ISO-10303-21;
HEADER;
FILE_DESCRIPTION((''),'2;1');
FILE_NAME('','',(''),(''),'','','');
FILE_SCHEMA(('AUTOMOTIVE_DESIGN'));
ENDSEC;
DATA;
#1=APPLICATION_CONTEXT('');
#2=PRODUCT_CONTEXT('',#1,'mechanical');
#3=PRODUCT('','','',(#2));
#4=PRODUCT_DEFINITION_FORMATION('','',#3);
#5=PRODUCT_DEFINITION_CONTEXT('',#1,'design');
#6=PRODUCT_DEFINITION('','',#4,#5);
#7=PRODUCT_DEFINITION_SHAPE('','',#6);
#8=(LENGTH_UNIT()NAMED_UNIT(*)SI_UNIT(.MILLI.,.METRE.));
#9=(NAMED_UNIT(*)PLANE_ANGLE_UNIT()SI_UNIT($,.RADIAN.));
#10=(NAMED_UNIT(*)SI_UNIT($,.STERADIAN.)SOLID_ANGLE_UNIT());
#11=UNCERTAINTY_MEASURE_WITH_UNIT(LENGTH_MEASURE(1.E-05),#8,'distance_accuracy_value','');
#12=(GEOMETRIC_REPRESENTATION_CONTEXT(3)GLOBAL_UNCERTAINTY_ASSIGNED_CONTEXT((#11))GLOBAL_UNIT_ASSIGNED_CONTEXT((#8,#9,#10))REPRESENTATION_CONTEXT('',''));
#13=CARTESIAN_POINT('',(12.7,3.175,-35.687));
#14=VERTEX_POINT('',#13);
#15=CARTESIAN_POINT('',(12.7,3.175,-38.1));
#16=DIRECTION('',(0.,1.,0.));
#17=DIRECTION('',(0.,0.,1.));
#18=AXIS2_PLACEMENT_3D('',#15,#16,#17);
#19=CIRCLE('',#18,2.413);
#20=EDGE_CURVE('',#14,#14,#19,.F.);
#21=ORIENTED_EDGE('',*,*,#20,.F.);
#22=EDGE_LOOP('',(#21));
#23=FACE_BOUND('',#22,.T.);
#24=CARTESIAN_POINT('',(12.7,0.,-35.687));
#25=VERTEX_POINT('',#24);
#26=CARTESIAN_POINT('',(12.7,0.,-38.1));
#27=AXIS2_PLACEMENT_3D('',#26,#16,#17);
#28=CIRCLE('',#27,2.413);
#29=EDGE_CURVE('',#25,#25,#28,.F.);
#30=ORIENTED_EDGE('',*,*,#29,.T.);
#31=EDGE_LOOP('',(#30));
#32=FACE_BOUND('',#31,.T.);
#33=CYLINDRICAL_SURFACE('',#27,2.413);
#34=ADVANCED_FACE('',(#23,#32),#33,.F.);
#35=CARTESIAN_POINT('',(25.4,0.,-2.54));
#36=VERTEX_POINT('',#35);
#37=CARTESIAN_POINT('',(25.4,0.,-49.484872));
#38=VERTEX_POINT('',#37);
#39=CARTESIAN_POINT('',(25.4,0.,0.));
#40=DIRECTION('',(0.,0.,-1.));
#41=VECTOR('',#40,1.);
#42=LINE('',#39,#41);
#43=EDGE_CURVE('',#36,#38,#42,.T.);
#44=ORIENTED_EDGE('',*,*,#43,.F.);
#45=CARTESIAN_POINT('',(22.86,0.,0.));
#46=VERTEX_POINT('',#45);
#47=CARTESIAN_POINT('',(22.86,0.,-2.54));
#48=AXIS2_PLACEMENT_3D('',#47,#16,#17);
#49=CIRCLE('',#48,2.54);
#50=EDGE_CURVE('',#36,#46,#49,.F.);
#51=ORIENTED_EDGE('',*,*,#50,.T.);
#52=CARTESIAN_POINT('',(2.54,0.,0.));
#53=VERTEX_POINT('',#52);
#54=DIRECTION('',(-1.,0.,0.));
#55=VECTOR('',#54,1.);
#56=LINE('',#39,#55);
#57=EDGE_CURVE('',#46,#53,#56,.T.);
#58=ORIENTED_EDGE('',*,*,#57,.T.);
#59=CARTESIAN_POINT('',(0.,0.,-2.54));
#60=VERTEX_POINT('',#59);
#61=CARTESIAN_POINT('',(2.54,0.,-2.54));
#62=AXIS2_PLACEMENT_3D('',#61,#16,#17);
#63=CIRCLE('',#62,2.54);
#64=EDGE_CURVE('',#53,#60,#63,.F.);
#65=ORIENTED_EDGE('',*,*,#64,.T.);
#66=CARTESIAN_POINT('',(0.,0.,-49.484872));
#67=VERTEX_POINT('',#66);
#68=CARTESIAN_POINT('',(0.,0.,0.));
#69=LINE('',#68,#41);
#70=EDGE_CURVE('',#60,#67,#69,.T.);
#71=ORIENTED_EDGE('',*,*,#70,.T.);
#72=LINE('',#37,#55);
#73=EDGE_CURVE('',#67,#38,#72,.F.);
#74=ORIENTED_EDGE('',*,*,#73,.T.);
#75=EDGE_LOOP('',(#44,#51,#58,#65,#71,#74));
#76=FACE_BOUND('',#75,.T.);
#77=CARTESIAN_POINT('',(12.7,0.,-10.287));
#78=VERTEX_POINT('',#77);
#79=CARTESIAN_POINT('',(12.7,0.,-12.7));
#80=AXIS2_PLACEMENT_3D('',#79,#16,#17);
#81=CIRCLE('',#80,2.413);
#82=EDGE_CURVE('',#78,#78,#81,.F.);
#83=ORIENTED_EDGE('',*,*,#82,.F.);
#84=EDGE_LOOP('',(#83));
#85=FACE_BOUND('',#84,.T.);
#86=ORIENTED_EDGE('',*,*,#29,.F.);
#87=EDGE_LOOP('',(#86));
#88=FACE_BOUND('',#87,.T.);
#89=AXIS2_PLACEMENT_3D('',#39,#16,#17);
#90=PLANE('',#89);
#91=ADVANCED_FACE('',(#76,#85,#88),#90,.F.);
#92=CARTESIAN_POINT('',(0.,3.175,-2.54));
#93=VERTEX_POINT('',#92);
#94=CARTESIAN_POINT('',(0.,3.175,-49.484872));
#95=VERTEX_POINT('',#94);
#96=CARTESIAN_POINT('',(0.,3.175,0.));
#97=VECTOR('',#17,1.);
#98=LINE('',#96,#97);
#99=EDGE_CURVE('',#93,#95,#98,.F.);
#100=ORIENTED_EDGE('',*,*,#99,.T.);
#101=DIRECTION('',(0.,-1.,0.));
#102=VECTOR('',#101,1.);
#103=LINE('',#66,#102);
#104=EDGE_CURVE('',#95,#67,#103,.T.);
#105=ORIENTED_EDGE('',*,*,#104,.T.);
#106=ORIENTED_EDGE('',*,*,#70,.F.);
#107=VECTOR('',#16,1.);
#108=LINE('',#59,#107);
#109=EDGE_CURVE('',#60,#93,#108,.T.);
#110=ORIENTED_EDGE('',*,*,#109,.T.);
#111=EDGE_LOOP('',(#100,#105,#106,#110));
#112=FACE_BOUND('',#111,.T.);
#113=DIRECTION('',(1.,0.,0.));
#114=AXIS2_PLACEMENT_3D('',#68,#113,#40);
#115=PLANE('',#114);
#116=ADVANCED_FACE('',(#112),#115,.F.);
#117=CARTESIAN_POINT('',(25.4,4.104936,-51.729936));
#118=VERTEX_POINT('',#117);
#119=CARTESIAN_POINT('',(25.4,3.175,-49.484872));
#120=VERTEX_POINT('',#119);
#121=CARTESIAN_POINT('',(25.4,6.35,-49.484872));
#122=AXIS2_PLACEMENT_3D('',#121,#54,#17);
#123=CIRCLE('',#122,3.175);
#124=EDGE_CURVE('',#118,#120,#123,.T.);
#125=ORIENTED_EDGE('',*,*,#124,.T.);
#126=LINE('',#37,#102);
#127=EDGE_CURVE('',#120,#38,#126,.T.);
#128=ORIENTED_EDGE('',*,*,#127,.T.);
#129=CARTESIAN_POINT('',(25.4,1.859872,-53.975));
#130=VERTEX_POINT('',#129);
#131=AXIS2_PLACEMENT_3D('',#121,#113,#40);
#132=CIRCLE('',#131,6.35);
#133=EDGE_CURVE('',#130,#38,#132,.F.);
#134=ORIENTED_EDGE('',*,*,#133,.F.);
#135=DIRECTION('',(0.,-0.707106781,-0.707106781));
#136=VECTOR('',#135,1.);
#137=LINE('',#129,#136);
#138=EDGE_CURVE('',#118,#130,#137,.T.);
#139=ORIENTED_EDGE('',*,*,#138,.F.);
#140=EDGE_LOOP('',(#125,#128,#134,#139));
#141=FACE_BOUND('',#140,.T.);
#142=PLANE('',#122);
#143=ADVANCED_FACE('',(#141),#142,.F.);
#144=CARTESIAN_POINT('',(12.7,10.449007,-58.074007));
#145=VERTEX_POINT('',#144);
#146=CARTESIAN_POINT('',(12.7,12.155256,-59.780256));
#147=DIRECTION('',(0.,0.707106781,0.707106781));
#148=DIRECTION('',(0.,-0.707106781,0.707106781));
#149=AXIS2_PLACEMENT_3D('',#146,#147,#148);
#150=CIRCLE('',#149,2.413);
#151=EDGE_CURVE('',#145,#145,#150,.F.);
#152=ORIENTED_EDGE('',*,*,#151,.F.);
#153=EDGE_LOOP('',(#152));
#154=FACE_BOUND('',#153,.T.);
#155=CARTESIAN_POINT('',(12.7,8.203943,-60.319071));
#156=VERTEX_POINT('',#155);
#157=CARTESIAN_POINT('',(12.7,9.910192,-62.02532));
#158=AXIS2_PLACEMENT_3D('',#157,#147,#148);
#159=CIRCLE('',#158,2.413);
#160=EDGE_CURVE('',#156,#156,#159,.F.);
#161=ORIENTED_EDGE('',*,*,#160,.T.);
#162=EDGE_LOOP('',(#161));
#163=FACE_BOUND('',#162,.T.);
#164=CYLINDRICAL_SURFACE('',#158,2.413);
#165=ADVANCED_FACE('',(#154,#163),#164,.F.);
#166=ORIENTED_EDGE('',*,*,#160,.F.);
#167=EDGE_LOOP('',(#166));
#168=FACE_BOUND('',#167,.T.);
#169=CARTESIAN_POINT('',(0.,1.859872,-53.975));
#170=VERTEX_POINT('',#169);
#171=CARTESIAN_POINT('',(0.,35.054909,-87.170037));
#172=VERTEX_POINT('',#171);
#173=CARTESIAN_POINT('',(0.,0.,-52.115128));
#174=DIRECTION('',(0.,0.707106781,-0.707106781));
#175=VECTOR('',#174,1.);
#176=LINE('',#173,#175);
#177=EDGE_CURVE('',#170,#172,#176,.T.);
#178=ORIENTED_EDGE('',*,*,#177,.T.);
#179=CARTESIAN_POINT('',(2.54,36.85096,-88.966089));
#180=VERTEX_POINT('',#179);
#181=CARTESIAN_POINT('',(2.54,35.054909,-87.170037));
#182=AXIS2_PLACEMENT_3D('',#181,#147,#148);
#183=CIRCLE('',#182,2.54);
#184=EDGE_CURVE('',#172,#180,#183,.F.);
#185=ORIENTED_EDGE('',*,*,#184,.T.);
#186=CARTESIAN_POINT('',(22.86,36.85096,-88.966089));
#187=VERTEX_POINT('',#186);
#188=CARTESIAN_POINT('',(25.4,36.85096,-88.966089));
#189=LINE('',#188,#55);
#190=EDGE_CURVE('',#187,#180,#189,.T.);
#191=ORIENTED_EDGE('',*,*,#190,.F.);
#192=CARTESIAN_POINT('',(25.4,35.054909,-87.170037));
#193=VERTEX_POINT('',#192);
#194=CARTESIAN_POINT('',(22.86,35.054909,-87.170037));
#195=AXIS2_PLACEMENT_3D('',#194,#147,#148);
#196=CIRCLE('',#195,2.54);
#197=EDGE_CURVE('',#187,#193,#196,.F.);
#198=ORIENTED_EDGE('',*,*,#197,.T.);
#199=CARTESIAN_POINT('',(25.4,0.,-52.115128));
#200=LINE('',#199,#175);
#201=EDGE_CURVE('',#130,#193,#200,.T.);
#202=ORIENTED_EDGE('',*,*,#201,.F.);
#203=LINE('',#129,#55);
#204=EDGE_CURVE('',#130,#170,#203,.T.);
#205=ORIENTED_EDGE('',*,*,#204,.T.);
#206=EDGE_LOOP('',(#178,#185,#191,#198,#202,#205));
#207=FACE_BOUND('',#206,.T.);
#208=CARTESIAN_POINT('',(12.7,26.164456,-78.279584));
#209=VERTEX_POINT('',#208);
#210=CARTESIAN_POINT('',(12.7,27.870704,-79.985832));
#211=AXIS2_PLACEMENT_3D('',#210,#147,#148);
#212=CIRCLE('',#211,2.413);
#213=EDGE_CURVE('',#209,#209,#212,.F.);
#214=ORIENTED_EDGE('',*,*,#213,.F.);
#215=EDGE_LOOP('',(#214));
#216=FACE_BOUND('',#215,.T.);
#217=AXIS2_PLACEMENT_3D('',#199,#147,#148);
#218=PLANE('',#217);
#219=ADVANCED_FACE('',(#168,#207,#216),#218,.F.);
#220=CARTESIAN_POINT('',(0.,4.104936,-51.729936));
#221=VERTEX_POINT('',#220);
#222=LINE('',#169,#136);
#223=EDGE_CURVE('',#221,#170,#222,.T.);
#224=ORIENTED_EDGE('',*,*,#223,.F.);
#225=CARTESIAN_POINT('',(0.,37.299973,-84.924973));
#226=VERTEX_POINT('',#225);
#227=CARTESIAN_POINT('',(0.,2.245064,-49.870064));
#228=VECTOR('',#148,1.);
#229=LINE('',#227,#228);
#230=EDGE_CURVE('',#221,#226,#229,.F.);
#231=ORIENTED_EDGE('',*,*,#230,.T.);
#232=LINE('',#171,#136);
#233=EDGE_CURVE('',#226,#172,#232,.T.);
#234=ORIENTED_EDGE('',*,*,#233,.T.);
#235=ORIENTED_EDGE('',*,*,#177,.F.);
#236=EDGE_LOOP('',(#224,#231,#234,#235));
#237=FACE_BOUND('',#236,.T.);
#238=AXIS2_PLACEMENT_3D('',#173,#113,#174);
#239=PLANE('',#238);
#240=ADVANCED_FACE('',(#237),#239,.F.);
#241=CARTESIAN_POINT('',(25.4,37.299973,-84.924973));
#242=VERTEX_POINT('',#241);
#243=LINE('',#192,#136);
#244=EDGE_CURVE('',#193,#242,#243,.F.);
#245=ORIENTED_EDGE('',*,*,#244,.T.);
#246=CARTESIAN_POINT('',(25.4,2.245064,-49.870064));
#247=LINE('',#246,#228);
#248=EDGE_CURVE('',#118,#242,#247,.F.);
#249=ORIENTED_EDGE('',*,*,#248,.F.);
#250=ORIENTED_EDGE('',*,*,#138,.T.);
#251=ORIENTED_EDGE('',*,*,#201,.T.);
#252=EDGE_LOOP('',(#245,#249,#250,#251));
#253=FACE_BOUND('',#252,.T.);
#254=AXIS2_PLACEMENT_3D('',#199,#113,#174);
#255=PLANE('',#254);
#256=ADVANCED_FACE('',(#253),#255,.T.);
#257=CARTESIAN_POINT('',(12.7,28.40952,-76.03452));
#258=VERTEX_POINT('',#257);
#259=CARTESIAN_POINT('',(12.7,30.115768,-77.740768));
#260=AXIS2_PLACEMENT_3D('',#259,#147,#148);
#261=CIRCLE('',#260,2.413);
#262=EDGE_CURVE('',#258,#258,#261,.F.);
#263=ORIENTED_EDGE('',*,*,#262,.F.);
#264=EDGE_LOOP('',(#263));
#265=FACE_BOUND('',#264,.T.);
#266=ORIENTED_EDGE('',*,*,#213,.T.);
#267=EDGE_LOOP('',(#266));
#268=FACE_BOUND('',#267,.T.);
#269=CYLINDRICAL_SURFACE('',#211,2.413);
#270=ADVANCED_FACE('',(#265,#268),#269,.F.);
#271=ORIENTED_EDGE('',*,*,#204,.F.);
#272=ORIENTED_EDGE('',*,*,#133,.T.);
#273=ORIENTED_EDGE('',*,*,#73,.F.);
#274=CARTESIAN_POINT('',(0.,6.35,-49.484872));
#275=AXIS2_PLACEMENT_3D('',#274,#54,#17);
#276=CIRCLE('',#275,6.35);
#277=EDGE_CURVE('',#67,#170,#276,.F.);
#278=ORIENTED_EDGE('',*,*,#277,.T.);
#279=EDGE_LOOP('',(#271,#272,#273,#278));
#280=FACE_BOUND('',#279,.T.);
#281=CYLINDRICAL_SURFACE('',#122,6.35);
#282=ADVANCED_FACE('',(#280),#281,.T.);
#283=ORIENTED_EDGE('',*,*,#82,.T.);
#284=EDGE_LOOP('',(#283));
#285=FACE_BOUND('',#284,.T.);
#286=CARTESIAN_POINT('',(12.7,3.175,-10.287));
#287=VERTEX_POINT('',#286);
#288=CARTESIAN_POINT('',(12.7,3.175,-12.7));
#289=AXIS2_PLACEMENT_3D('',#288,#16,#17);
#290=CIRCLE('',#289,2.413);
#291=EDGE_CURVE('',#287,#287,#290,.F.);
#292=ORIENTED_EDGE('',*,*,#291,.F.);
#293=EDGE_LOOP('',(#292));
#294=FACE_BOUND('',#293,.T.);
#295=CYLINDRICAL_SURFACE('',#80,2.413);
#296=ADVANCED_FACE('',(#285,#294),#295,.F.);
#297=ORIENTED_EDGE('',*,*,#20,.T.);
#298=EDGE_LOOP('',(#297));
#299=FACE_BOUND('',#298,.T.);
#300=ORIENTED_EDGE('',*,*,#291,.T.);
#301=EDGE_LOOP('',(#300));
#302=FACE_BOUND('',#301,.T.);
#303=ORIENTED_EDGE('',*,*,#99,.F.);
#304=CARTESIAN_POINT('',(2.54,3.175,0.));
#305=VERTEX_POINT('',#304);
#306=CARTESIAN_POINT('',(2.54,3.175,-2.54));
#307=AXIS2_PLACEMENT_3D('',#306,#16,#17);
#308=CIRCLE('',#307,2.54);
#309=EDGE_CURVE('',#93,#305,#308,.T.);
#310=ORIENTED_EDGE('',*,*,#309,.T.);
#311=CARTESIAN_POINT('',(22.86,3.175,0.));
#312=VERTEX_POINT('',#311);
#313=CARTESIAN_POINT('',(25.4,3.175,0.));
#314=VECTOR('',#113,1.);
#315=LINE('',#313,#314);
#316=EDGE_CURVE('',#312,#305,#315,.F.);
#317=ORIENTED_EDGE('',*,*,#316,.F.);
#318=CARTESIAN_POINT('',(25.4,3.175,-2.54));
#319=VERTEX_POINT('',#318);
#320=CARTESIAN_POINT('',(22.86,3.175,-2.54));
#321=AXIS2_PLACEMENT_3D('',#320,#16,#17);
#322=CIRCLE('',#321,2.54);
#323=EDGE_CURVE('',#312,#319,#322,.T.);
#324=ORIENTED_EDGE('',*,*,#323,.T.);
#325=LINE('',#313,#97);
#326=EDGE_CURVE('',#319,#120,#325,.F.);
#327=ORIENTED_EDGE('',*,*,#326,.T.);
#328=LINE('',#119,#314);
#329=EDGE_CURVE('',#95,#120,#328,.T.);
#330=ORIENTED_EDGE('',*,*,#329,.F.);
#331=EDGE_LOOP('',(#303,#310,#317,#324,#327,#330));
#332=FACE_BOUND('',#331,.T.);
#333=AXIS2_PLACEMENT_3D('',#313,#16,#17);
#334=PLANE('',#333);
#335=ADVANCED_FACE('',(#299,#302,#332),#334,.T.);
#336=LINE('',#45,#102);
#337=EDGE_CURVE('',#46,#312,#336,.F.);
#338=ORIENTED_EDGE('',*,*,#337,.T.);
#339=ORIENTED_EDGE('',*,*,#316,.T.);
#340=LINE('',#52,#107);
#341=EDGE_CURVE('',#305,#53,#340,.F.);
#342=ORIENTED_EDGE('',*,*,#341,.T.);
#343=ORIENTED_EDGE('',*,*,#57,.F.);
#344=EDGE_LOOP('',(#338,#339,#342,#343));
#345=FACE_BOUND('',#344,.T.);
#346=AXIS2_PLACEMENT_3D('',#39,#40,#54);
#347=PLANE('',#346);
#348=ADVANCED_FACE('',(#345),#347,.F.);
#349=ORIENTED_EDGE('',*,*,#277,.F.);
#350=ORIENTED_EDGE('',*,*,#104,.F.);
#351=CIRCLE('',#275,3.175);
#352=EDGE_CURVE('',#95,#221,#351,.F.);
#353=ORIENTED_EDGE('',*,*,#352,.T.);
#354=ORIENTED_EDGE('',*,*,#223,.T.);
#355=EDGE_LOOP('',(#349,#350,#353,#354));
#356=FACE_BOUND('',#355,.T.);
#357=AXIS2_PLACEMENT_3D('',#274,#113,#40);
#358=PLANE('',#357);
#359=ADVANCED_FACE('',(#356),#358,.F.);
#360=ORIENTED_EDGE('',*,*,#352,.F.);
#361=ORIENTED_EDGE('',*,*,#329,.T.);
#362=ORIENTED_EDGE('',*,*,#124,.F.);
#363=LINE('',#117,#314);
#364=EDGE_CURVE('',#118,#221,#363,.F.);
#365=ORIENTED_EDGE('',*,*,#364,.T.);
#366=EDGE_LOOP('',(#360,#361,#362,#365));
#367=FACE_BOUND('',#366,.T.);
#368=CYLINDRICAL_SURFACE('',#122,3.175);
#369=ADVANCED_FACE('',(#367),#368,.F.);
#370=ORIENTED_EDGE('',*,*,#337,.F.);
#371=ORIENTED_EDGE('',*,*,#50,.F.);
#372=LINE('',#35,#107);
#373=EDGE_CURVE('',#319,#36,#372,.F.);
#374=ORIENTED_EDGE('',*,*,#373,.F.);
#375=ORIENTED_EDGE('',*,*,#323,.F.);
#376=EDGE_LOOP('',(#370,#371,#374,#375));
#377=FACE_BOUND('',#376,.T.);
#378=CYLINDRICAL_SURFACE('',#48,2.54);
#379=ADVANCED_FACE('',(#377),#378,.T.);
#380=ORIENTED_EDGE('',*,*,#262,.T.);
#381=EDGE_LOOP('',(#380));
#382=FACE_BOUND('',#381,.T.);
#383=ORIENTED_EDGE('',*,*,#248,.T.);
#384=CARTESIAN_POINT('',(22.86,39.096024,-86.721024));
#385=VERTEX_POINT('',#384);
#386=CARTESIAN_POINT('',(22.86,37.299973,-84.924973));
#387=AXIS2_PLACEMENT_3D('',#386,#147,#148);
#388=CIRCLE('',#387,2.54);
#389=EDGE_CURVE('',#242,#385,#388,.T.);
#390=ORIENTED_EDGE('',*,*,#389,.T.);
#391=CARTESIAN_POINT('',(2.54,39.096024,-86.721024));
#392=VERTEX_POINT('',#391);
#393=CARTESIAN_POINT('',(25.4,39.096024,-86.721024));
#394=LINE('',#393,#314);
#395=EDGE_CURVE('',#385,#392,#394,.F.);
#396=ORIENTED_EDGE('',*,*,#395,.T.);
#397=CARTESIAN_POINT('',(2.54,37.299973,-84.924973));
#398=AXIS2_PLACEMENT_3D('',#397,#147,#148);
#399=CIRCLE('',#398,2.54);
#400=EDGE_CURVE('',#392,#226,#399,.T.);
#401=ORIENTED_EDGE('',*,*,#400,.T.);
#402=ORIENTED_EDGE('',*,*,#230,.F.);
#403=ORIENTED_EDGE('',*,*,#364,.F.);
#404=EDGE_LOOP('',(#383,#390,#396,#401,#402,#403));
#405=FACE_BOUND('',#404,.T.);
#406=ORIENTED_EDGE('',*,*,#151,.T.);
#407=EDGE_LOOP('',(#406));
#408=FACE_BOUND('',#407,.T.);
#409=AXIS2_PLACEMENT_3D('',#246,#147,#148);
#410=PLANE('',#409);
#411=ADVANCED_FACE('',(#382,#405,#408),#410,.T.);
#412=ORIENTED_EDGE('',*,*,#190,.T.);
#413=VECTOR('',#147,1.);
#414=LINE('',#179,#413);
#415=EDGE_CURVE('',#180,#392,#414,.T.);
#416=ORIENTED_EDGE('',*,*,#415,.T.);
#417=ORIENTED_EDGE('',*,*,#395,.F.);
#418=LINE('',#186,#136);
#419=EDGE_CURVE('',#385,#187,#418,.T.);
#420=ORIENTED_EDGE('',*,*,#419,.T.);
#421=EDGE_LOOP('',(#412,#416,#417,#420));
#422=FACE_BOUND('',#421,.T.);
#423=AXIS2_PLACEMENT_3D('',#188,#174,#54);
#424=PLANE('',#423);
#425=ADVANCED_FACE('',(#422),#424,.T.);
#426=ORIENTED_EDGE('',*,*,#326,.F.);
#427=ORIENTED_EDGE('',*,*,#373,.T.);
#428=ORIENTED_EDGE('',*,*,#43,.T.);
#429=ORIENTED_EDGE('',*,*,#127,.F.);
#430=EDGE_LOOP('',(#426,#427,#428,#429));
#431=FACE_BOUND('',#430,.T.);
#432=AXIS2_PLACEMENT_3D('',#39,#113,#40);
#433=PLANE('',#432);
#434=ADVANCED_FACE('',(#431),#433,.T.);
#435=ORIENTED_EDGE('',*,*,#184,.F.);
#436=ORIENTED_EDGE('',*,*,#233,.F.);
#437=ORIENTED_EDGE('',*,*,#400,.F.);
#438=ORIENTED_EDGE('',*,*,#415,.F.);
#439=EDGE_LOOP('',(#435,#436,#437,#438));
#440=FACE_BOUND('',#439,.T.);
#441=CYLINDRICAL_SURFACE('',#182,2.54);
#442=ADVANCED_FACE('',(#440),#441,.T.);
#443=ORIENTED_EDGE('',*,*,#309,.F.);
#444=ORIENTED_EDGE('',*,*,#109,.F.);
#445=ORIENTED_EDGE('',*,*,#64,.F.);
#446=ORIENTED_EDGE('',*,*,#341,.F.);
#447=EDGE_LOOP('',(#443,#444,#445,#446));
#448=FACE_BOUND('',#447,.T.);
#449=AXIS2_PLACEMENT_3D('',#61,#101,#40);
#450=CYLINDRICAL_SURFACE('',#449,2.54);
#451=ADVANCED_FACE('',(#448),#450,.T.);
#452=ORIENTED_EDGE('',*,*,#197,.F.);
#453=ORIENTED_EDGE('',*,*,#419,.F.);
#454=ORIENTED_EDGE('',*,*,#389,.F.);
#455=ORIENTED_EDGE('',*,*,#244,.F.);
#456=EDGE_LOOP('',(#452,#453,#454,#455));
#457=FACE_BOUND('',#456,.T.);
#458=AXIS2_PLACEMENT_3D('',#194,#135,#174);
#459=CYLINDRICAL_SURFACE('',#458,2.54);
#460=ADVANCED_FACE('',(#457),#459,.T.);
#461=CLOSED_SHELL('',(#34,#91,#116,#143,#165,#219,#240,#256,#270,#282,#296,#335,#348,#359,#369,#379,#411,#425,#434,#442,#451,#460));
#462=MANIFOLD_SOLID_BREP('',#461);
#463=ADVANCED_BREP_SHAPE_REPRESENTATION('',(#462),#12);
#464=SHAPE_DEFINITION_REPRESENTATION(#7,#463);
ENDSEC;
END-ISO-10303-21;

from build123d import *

# Parameters (mm, degrees)
BOSS_EXTRUDE1_DEPTH    = 25.4
CUT_EXTRUDE1_REACH     = 101.249
SKETCH2_R              = 2.413
CUT_EXTRUDE2_REACH     = 96.062
SKETCH3_R              = 2.413
CONVERT_SOLID1_DEPTH   = 25.4
CONVERT_SOLID1_2_DEPTH = 25.4
FILLET1_R              = 2.54


# Read off the part's stored shape, not the designer's step: Convert-Solid1
with BuildPart() as part:
    # Sketch1 → Boss-Extrude1 (new body)
    with BuildSketch(Plane(origin=(0, 0, 0), x_dir=(0, 0, -1), z_dir=(1, 0, 0))):
        Polygon((0, 0), (52.115128061, 0), (88.966088515, 36.850960454), (86.721024484, 39.096024484), (50.8, 3.175), (0, 3.175), align=None)
    extrude(amount=BOSS_EXTRUDE1_DEPTH)

    # Sketch2 → Cut-Extrude1 (cut, up to next)
    with BuildSketch(Plane(origin=(0, 3.175, 0), x_dir=(1, 0, 0), z_dir=(0, 1, 0)), mode=Mode.PRIVATE) as cut_extrude1_sk1:
        with Locations(Location((12.7, 12.7, 0), (0, 0, 270))):
            Circle(SKETCH2_R)
    cut_extrude1_tool1 = extrude(cut_extrude1_sk1.sketch, amount=-CUT_EXTRUDE1_REACH, mode=Mode.PRIVATE) & part.part
    # Sketch2 → Cut-Extrude1 (cut, up to next)
    with BuildSketch(Plane(origin=(0, 3.175, 0), x_dir=(1, 0, 0), z_dir=(0, 1, 0)), mode=Mode.PRIVATE) as cut_extrude1_sk2:
        with Locations(Location((12.7, 38.1, 0), (0, 0, 270))):
            Circle(SKETCH2_R)
    cut_extrude1_tool2 = extrude(cut_extrude1_sk2.sketch, amount=-CUT_EXTRUDE1_REACH, mode=Mode.PRIVATE) & part.part
    add(cut_extrude1_tool1.solids().sort_by_distance((12.7, 3.175, -12.7))[0], mode=Mode.SUBTRACT)
    add(cut_extrude1_tool2.solids().sort_by_distance((12.7, 3.175, -38.1))[0], mode=Mode.SUBTRACT)

    # Sketch3 → Cut-Extrude2 (cut, up to next)
    with BuildSketch(Plane(origin=(0, -23.8125, -23.8125), x_dir=(1, 0, 0), z_dir=(0, 0.707106781186546, 0.707106781186549)), mode=Mode.PRIVATE) as cut_extrude2_sk1:
        with Locations(Location((12.7, 76.266088515, 0), (0, 0, 270))):
            Circle(SKETCH3_R)
    cut_extrude2_tool1 = extrude(cut_extrude2_sk1.sketch, amount=-CUT_EXTRUDE2_REACH, mode=Mode.PRIVATE) & part.part
    # Sketch3 → Cut-Extrude2 (cut, up to next)
    with BuildSketch(Plane(origin=(0, -23.8125, -23.8125), x_dir=(1, 0, 0), z_dir=(0, 0.707106781186546, 0.707106781186549)), mode=Mode.PRIVATE) as cut_extrude2_sk2:
        with Locations(Location((12.7, 50.866088515, 0), (0, 0, 270))):
            Circle(SKETCH3_R)
    cut_extrude2_tool2 = extrude(cut_extrude2_sk2.sketch, amount=-CUT_EXTRUDE2_REACH, mode=Mode.PRIVATE) & part.part
    add(cut_extrude2_tool1.solids().sort_by_distance((12.7, 30.115768, -77.740768))[0], mode=Mode.SUBTRACT)
    add(cut_extrude2_tool2.solids().sort_by_distance((12.7, 12.155256, -59.780256))[0], mode=Mode.SUBTRACT)

    # Convert-Solid1 outline → Convert-Solid1 (cut)
    with BuildSketch(Plane.YZ):
        with BuildLine():
            Line((0, -52.115128061), (1.859871939, -53.975))
            ThreePointArc((1.859871939, -53.975), (0.483364969, -51.914911734), (0, -49.484871939))
            Line((0, -49.484871939), (0, -52.115128061))
        make_face()
    extrude(amount=CONVERT_SOLID1_DEPTH, mode=Mode.SUBTRACT)

    # Convert-Solid1 2 outline → Convert-Solid1 2 (add)
    with BuildSketch(Plane.YZ):
        with BuildLine():
            Line((3.175, -50.8), (4.10493597, -51.72993597))
            ThreePointArc((4.10493597, -51.72993597), (3.416682484, -50.699891837), (3.175, -49.484871939))
            Line((3.175, -49.484871939), (3.175, -50.8))
        make_face()
    extrude(amount=CONVERT_SOLID1_2_DEPTH)

    # Fillet1
    fillet1_edges = [part.edges().sort_by_distance(p)[0] for p in [
        (0, 1.5875, 0),
        (25.4, 1.5875, 0),
        (25.4, 37.973492469, -87.843556499),
        (0, 37.973492469, -87.843556499),
    ]]
    fillet(fillet1_edges, radius=FILLET1_R)


solid = part.part
